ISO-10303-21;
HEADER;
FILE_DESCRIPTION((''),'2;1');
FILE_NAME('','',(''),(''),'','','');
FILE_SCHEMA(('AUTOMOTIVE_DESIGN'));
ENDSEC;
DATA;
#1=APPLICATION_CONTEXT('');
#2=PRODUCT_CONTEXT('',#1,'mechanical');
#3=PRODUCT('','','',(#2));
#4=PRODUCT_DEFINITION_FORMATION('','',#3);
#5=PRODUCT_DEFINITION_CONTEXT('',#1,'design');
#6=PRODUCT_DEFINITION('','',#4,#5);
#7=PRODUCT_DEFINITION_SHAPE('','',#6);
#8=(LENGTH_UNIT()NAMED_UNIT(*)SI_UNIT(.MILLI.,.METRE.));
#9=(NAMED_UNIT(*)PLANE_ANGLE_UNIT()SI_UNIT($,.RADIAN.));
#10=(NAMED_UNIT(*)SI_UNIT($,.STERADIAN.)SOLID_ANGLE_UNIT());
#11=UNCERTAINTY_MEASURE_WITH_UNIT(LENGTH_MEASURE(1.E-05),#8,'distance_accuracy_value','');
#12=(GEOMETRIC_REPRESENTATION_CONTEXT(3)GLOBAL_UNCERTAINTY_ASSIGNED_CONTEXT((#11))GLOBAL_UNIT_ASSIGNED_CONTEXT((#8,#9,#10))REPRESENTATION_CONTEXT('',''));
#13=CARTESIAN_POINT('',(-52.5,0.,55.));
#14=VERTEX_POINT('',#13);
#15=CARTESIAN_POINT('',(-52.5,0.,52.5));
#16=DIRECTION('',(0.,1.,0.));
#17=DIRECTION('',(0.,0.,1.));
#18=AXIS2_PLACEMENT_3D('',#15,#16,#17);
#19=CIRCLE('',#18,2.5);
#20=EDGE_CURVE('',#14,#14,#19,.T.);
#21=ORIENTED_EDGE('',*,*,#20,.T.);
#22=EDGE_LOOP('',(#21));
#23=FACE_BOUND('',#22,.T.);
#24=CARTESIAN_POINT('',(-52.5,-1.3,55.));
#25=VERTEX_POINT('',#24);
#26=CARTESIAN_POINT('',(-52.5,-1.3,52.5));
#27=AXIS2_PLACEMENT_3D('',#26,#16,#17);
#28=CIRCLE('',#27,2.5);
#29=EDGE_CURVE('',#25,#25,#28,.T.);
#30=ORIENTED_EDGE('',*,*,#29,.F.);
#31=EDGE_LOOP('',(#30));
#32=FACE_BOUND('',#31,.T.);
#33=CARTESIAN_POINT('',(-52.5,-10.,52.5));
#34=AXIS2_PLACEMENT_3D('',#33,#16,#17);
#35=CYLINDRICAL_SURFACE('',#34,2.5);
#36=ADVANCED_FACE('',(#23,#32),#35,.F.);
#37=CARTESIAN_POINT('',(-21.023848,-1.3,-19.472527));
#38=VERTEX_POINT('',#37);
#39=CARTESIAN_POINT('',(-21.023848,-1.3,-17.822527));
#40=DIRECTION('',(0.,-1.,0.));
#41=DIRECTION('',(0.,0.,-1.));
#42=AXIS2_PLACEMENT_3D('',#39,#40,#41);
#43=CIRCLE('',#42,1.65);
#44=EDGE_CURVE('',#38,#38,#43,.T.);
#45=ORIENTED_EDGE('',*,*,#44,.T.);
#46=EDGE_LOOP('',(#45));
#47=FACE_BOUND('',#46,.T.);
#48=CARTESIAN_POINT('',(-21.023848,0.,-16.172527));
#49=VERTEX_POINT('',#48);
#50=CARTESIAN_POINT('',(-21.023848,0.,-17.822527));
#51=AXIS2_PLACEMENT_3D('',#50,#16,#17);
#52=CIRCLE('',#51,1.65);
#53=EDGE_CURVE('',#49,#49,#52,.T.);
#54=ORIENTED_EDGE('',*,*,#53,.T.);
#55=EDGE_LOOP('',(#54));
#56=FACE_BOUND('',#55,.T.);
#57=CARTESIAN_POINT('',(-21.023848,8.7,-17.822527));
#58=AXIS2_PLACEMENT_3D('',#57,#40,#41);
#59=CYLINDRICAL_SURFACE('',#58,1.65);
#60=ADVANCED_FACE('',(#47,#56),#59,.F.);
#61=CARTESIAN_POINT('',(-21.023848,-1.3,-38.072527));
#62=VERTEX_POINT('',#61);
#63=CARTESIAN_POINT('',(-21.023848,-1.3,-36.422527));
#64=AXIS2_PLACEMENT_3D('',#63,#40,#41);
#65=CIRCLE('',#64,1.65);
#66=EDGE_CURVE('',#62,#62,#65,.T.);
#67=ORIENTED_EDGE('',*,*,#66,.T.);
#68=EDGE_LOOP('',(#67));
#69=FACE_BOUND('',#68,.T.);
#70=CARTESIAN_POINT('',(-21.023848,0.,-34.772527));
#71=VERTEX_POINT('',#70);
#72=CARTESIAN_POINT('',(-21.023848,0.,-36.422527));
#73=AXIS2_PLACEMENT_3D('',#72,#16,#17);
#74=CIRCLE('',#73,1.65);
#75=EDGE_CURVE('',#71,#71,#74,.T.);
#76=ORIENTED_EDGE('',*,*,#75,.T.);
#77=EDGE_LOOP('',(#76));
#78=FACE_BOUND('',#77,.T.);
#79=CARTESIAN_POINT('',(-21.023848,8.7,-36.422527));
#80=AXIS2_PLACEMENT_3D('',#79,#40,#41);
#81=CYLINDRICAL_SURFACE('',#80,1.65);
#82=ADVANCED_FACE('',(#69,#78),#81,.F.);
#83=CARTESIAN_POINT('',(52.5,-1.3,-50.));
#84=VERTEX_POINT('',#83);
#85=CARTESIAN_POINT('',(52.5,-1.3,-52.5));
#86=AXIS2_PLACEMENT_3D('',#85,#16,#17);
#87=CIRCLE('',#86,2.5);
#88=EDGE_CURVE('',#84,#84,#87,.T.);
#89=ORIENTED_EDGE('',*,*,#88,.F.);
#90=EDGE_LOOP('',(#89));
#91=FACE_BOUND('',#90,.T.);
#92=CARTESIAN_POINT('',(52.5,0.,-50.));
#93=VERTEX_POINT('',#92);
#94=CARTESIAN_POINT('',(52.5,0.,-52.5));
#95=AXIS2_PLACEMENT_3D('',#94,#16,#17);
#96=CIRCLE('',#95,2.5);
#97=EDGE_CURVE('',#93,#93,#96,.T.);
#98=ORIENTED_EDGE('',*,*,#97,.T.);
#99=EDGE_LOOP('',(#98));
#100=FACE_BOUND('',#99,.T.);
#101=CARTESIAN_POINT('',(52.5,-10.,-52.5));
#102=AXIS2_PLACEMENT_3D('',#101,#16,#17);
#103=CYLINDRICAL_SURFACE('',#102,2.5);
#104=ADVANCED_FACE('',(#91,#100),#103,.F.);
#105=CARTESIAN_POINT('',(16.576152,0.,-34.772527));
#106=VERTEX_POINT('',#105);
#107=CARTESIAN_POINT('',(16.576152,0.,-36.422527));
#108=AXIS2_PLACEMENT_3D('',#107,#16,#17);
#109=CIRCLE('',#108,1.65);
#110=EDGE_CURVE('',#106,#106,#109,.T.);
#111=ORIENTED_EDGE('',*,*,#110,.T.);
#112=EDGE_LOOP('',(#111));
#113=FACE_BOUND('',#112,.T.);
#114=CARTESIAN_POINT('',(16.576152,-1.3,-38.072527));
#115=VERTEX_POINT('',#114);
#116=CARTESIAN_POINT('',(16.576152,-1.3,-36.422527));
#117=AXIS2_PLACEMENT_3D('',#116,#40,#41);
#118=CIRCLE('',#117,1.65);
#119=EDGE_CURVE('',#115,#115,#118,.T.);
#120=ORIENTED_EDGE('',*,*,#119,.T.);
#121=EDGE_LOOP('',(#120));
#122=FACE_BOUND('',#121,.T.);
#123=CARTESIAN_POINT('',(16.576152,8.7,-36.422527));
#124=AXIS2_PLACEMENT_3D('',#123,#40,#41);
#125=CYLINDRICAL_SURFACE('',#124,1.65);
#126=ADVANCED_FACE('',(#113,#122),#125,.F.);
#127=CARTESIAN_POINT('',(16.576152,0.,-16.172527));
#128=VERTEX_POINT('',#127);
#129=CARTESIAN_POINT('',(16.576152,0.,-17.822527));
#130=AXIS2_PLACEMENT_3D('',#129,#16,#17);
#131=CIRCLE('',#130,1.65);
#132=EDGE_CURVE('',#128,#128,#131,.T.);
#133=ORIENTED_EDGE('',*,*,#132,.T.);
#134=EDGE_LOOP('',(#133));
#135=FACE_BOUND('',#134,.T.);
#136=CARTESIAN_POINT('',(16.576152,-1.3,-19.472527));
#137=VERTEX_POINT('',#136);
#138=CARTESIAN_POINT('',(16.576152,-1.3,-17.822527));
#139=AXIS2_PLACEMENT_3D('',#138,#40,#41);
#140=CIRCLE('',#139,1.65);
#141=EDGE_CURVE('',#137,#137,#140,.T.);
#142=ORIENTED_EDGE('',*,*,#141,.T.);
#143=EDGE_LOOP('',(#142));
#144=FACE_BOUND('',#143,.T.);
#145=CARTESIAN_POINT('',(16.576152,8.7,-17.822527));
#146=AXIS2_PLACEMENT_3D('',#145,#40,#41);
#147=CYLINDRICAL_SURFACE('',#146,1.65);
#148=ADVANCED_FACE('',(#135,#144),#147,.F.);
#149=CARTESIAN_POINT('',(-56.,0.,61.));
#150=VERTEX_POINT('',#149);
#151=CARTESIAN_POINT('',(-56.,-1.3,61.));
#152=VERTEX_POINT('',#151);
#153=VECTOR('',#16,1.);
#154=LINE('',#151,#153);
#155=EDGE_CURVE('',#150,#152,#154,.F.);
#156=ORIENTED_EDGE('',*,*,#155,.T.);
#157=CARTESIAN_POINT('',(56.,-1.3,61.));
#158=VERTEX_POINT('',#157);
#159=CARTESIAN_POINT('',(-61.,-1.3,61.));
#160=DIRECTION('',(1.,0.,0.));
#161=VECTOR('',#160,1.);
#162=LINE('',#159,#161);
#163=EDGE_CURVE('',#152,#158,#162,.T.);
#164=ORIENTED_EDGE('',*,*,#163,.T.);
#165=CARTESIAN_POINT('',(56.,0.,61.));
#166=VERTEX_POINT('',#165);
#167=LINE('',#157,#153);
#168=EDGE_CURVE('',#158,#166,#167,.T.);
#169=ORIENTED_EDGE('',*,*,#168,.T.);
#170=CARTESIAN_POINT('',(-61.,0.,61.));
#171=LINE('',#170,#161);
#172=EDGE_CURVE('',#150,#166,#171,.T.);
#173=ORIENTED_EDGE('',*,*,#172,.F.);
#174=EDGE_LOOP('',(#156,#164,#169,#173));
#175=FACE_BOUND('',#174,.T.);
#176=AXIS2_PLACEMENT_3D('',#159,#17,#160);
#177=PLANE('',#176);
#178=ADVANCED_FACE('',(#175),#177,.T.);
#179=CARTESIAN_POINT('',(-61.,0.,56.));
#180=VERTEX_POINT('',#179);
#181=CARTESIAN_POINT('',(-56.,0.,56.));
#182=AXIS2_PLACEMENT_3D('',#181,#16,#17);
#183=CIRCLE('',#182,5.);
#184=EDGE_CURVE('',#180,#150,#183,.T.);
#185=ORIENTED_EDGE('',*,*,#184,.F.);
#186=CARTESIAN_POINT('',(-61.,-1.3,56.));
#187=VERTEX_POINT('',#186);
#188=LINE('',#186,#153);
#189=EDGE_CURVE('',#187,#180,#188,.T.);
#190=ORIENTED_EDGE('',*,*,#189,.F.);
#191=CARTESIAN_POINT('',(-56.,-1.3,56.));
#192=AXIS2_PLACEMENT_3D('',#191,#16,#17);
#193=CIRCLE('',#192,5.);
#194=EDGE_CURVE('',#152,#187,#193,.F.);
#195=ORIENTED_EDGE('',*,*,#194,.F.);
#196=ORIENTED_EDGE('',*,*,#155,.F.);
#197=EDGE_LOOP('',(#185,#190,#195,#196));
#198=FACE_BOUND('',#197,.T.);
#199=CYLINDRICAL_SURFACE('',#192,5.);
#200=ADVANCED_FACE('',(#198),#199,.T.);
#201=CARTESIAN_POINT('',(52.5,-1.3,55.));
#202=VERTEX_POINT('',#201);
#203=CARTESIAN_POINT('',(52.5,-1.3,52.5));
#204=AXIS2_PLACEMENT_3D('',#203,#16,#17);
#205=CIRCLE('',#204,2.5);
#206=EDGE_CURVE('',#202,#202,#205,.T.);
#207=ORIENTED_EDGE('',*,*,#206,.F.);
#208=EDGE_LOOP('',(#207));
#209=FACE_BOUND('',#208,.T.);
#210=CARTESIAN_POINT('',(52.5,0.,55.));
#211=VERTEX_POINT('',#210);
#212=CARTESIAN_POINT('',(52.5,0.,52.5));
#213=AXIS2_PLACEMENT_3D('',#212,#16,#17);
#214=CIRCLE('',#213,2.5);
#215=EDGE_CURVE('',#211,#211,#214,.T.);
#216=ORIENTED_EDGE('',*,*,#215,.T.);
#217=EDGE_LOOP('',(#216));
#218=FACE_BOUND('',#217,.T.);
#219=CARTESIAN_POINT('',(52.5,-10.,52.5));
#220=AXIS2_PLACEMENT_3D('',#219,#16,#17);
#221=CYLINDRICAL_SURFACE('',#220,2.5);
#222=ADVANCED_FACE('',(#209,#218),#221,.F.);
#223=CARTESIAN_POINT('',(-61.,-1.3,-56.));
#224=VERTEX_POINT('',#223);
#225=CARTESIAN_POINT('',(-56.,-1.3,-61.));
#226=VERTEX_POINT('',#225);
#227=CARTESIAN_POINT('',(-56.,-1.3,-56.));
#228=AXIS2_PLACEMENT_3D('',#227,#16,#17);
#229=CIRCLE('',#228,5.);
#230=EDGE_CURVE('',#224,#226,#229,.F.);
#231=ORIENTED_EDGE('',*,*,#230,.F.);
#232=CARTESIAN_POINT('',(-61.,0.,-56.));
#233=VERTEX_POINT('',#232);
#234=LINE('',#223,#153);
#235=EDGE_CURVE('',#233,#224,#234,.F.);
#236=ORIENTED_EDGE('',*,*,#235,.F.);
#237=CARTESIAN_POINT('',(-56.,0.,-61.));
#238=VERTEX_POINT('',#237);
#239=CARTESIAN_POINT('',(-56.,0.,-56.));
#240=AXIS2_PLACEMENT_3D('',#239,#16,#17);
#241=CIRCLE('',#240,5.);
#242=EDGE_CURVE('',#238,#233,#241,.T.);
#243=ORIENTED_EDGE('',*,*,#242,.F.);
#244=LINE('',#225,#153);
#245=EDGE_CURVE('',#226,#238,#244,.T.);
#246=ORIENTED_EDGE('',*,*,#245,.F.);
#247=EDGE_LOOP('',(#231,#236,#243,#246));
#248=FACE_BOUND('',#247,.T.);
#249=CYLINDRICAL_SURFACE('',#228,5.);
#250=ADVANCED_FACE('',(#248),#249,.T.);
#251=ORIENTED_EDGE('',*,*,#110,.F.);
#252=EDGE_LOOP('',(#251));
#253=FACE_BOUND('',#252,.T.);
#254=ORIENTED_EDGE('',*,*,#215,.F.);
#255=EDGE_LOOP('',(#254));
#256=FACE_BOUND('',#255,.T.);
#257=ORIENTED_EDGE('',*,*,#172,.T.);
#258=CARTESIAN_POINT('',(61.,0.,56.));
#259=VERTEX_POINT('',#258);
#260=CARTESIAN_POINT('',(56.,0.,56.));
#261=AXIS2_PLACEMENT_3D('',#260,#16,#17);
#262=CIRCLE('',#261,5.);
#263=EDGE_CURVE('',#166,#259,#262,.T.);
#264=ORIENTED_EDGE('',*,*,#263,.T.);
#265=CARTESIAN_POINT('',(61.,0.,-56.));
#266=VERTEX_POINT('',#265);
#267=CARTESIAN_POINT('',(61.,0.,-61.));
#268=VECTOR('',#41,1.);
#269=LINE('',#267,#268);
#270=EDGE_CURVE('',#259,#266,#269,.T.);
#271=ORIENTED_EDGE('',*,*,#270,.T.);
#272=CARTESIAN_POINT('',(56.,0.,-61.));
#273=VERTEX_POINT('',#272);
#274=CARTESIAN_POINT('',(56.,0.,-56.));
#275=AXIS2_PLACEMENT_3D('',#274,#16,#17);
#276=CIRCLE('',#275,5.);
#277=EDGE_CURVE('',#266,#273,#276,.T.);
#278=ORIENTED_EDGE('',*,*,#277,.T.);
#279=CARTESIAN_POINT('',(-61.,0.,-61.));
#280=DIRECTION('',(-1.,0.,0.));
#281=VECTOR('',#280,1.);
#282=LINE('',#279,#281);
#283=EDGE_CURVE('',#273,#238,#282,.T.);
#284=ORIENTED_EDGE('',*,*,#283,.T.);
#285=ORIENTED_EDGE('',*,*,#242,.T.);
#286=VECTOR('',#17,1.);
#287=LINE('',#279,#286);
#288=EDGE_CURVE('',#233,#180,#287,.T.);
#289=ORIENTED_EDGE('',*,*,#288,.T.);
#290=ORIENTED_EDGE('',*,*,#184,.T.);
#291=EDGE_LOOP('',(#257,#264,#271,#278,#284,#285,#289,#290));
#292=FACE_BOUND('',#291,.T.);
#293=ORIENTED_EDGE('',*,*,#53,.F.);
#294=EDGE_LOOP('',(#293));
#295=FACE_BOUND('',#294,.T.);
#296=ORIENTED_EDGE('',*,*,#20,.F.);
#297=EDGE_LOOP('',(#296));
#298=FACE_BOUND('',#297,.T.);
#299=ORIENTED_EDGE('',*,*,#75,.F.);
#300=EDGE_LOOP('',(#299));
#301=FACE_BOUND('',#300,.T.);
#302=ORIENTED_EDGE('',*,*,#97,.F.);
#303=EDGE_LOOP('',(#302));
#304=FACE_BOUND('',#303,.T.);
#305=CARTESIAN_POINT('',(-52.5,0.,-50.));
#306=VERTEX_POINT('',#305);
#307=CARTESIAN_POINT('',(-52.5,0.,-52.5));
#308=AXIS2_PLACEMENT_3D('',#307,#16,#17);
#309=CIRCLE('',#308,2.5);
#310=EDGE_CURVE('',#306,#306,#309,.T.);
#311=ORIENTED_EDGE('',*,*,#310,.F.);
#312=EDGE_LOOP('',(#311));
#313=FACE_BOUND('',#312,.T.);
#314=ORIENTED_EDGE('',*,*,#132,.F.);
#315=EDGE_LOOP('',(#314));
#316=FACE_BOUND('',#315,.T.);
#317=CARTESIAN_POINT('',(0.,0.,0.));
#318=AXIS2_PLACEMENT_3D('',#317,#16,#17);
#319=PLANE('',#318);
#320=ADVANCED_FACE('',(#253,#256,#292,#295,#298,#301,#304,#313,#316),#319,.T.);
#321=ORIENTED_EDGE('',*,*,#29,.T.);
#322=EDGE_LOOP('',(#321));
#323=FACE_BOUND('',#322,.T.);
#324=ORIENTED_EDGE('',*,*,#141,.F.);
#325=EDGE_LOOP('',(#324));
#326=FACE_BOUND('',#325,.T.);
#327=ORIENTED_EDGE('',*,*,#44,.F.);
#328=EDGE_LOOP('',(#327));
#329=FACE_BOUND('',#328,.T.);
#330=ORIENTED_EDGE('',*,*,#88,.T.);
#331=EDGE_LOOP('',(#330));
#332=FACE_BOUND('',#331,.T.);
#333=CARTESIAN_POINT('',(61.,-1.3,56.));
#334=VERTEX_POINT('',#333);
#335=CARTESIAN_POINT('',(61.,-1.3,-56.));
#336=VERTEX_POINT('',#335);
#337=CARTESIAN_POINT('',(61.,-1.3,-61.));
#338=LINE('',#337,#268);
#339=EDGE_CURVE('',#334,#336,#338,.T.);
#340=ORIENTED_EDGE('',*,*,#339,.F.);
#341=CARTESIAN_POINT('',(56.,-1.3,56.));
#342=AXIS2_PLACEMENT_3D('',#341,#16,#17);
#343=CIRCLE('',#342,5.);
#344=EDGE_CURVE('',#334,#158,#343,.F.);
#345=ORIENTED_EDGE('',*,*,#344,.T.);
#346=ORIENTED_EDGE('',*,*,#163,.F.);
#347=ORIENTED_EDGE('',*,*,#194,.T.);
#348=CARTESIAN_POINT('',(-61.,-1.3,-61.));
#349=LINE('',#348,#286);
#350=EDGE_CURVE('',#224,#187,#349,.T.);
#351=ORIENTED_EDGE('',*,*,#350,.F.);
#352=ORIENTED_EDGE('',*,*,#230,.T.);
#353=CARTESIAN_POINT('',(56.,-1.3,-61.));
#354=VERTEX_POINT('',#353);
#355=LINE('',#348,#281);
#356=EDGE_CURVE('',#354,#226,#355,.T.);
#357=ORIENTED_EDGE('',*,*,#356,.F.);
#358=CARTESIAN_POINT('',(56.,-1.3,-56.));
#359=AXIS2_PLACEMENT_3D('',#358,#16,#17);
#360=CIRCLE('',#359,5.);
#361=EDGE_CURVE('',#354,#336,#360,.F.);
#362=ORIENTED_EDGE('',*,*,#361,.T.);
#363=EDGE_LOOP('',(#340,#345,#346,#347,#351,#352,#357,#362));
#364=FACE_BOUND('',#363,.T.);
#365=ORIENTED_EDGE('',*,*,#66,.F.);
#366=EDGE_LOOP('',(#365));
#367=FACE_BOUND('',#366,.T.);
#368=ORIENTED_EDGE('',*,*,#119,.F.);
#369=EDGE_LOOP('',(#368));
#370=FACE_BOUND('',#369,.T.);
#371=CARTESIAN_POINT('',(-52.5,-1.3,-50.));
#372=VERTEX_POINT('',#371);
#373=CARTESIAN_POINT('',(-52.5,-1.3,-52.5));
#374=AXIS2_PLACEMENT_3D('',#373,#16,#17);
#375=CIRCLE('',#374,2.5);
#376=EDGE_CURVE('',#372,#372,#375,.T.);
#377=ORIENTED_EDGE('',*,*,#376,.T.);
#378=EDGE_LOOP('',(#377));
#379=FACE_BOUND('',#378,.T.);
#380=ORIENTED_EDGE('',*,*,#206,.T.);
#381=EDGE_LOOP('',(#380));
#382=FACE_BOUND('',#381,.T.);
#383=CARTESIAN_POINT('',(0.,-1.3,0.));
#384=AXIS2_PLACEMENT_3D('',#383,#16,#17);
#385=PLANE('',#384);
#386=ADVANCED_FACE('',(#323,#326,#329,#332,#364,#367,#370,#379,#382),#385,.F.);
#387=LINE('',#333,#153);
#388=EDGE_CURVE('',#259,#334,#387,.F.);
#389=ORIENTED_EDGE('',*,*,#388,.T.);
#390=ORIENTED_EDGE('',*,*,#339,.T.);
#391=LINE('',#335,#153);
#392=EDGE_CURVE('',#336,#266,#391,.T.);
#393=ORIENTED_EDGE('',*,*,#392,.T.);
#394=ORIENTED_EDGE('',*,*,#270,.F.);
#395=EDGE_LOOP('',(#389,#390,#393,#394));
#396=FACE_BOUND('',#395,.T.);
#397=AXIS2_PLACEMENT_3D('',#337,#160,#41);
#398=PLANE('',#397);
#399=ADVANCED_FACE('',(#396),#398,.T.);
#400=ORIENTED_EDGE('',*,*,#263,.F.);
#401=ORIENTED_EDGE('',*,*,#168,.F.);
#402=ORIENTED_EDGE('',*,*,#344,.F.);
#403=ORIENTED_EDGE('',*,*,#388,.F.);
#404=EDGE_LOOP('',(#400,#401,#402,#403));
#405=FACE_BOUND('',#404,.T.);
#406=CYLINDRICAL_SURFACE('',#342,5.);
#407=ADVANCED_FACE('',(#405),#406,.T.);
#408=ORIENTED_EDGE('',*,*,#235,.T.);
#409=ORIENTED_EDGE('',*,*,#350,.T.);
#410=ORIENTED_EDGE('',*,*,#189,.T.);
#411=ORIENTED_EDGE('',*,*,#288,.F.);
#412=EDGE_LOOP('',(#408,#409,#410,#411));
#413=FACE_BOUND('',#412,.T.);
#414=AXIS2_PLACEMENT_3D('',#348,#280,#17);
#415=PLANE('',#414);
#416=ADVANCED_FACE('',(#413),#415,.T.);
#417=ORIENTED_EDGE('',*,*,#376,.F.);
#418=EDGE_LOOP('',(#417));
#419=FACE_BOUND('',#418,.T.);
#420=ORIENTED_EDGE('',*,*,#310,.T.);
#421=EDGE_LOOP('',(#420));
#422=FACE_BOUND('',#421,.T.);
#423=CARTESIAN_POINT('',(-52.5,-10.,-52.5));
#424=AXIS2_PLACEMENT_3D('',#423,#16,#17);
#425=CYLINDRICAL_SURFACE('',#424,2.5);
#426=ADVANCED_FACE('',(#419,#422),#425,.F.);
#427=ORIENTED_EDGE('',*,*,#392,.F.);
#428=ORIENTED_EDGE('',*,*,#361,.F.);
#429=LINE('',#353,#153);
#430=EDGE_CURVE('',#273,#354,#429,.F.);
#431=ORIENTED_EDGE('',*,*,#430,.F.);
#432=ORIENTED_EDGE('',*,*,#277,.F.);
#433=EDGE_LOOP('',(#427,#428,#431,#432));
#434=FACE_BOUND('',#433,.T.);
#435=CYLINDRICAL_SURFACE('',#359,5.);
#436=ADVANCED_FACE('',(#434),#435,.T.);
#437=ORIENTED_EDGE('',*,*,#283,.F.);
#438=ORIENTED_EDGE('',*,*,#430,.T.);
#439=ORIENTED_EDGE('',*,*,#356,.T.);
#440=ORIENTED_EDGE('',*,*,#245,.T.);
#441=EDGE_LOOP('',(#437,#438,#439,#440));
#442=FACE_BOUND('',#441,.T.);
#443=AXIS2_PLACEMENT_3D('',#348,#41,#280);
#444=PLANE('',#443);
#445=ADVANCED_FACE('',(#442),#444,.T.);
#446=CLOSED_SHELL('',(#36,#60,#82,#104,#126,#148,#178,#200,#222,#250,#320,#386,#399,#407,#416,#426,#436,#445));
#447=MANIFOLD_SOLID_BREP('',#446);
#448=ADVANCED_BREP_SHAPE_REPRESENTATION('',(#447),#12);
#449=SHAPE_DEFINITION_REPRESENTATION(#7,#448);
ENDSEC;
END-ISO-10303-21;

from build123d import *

# Parameters (mm, degrees)
SKETCH1_W          = 122
SKETCH1_H          = 122
BASE_FLANGE1_DEPTH = 1.3
FILLET1_R          = 5
SKETCH3_R          = 2.5
CUT_EXTRUDE1_DEPTH = 10
SKETCH4_R          = 1.649999999
CUT_EXTRUDE2_DEPTH = 10


# Sheet-metal steps are written as plain solids
with BuildPart() as part:
    # Sketch1 → Base-Flange1 (new body)
    with BuildSketch(Plane(origin=(0, 0, 0), x_dir=(1, 0, 0), z_dir=(0, 1, 0))):
        Rectangle(SKETCH1_W, SKETCH1_H)
    extrude(amount=-BASE_FLANGE1_DEPTH)

    # Fillet1
    fillet1_edges = [part.edges().sort_by_distance(p)[0] for p in [
        (61, -0.65, 61),
        (-61, -0.65, 61),
        (-61, -0.65, -61),
        (61, -0.65, -61),
    ]]
    fillet(fillet1_edges, radius=FILLET1_R)

    # Sketch3 → Cut-Extrude1 (cut)
    with BuildSketch(Plane(origin=(0, 0, 0), x_dir=(1, 0, 0), z_dir=(0, 1, 0))):
        with Locations(Location((52.5, 52.5, 0), (0, 0, 270))):
            Circle(SKETCH3_R)
        with Locations(Location((-52.5, 52.5, 0), (0, 0, 270))):
            Circle(SKETCH3_R)
        with Locations(Location((-52.5, -52.5, 0), (0, 0, 270))):
            Circle(SKETCH3_R)
        with Locations(Location((52.5, -52.5, 0), (0, 0, 270))):
            Circle(SKETCH3_R)
    extrude(amount=-CUT_EXTRUDE1_DEPTH, mode=Mode.SUBTRACT)

    # Sketch4 → Cut-Extrude2 (cut)
    with BuildSketch(Plane(origin=(0, -1.3, 0), x_dir=(-1, 0, 0), z_dir=(0, -1, 0))):
        with Locations(Location((21.023848249, 36.422526924, 0), (0, 0, 90))):
            Circle(SKETCH4_R)
        with Locations(Location((21.023848249, 17.822526924, 0), (0, 0, 90))):
            Circle(SKETCH4_R)
        with Locations(Location((-16.576151751, 17.822526924, 0), (0, 0, 90))):
            Circle(SKETCH4_R)
        with Locations(Location((-16.576151751, 36.422526924, 0), (0, 0, 90))):
            Circle(SKETCH4_R)
    extrude(amount=-CUT_EXTRUDE2_DEPTH, mode=Mode.SUBTRACT)


solid = part.part
